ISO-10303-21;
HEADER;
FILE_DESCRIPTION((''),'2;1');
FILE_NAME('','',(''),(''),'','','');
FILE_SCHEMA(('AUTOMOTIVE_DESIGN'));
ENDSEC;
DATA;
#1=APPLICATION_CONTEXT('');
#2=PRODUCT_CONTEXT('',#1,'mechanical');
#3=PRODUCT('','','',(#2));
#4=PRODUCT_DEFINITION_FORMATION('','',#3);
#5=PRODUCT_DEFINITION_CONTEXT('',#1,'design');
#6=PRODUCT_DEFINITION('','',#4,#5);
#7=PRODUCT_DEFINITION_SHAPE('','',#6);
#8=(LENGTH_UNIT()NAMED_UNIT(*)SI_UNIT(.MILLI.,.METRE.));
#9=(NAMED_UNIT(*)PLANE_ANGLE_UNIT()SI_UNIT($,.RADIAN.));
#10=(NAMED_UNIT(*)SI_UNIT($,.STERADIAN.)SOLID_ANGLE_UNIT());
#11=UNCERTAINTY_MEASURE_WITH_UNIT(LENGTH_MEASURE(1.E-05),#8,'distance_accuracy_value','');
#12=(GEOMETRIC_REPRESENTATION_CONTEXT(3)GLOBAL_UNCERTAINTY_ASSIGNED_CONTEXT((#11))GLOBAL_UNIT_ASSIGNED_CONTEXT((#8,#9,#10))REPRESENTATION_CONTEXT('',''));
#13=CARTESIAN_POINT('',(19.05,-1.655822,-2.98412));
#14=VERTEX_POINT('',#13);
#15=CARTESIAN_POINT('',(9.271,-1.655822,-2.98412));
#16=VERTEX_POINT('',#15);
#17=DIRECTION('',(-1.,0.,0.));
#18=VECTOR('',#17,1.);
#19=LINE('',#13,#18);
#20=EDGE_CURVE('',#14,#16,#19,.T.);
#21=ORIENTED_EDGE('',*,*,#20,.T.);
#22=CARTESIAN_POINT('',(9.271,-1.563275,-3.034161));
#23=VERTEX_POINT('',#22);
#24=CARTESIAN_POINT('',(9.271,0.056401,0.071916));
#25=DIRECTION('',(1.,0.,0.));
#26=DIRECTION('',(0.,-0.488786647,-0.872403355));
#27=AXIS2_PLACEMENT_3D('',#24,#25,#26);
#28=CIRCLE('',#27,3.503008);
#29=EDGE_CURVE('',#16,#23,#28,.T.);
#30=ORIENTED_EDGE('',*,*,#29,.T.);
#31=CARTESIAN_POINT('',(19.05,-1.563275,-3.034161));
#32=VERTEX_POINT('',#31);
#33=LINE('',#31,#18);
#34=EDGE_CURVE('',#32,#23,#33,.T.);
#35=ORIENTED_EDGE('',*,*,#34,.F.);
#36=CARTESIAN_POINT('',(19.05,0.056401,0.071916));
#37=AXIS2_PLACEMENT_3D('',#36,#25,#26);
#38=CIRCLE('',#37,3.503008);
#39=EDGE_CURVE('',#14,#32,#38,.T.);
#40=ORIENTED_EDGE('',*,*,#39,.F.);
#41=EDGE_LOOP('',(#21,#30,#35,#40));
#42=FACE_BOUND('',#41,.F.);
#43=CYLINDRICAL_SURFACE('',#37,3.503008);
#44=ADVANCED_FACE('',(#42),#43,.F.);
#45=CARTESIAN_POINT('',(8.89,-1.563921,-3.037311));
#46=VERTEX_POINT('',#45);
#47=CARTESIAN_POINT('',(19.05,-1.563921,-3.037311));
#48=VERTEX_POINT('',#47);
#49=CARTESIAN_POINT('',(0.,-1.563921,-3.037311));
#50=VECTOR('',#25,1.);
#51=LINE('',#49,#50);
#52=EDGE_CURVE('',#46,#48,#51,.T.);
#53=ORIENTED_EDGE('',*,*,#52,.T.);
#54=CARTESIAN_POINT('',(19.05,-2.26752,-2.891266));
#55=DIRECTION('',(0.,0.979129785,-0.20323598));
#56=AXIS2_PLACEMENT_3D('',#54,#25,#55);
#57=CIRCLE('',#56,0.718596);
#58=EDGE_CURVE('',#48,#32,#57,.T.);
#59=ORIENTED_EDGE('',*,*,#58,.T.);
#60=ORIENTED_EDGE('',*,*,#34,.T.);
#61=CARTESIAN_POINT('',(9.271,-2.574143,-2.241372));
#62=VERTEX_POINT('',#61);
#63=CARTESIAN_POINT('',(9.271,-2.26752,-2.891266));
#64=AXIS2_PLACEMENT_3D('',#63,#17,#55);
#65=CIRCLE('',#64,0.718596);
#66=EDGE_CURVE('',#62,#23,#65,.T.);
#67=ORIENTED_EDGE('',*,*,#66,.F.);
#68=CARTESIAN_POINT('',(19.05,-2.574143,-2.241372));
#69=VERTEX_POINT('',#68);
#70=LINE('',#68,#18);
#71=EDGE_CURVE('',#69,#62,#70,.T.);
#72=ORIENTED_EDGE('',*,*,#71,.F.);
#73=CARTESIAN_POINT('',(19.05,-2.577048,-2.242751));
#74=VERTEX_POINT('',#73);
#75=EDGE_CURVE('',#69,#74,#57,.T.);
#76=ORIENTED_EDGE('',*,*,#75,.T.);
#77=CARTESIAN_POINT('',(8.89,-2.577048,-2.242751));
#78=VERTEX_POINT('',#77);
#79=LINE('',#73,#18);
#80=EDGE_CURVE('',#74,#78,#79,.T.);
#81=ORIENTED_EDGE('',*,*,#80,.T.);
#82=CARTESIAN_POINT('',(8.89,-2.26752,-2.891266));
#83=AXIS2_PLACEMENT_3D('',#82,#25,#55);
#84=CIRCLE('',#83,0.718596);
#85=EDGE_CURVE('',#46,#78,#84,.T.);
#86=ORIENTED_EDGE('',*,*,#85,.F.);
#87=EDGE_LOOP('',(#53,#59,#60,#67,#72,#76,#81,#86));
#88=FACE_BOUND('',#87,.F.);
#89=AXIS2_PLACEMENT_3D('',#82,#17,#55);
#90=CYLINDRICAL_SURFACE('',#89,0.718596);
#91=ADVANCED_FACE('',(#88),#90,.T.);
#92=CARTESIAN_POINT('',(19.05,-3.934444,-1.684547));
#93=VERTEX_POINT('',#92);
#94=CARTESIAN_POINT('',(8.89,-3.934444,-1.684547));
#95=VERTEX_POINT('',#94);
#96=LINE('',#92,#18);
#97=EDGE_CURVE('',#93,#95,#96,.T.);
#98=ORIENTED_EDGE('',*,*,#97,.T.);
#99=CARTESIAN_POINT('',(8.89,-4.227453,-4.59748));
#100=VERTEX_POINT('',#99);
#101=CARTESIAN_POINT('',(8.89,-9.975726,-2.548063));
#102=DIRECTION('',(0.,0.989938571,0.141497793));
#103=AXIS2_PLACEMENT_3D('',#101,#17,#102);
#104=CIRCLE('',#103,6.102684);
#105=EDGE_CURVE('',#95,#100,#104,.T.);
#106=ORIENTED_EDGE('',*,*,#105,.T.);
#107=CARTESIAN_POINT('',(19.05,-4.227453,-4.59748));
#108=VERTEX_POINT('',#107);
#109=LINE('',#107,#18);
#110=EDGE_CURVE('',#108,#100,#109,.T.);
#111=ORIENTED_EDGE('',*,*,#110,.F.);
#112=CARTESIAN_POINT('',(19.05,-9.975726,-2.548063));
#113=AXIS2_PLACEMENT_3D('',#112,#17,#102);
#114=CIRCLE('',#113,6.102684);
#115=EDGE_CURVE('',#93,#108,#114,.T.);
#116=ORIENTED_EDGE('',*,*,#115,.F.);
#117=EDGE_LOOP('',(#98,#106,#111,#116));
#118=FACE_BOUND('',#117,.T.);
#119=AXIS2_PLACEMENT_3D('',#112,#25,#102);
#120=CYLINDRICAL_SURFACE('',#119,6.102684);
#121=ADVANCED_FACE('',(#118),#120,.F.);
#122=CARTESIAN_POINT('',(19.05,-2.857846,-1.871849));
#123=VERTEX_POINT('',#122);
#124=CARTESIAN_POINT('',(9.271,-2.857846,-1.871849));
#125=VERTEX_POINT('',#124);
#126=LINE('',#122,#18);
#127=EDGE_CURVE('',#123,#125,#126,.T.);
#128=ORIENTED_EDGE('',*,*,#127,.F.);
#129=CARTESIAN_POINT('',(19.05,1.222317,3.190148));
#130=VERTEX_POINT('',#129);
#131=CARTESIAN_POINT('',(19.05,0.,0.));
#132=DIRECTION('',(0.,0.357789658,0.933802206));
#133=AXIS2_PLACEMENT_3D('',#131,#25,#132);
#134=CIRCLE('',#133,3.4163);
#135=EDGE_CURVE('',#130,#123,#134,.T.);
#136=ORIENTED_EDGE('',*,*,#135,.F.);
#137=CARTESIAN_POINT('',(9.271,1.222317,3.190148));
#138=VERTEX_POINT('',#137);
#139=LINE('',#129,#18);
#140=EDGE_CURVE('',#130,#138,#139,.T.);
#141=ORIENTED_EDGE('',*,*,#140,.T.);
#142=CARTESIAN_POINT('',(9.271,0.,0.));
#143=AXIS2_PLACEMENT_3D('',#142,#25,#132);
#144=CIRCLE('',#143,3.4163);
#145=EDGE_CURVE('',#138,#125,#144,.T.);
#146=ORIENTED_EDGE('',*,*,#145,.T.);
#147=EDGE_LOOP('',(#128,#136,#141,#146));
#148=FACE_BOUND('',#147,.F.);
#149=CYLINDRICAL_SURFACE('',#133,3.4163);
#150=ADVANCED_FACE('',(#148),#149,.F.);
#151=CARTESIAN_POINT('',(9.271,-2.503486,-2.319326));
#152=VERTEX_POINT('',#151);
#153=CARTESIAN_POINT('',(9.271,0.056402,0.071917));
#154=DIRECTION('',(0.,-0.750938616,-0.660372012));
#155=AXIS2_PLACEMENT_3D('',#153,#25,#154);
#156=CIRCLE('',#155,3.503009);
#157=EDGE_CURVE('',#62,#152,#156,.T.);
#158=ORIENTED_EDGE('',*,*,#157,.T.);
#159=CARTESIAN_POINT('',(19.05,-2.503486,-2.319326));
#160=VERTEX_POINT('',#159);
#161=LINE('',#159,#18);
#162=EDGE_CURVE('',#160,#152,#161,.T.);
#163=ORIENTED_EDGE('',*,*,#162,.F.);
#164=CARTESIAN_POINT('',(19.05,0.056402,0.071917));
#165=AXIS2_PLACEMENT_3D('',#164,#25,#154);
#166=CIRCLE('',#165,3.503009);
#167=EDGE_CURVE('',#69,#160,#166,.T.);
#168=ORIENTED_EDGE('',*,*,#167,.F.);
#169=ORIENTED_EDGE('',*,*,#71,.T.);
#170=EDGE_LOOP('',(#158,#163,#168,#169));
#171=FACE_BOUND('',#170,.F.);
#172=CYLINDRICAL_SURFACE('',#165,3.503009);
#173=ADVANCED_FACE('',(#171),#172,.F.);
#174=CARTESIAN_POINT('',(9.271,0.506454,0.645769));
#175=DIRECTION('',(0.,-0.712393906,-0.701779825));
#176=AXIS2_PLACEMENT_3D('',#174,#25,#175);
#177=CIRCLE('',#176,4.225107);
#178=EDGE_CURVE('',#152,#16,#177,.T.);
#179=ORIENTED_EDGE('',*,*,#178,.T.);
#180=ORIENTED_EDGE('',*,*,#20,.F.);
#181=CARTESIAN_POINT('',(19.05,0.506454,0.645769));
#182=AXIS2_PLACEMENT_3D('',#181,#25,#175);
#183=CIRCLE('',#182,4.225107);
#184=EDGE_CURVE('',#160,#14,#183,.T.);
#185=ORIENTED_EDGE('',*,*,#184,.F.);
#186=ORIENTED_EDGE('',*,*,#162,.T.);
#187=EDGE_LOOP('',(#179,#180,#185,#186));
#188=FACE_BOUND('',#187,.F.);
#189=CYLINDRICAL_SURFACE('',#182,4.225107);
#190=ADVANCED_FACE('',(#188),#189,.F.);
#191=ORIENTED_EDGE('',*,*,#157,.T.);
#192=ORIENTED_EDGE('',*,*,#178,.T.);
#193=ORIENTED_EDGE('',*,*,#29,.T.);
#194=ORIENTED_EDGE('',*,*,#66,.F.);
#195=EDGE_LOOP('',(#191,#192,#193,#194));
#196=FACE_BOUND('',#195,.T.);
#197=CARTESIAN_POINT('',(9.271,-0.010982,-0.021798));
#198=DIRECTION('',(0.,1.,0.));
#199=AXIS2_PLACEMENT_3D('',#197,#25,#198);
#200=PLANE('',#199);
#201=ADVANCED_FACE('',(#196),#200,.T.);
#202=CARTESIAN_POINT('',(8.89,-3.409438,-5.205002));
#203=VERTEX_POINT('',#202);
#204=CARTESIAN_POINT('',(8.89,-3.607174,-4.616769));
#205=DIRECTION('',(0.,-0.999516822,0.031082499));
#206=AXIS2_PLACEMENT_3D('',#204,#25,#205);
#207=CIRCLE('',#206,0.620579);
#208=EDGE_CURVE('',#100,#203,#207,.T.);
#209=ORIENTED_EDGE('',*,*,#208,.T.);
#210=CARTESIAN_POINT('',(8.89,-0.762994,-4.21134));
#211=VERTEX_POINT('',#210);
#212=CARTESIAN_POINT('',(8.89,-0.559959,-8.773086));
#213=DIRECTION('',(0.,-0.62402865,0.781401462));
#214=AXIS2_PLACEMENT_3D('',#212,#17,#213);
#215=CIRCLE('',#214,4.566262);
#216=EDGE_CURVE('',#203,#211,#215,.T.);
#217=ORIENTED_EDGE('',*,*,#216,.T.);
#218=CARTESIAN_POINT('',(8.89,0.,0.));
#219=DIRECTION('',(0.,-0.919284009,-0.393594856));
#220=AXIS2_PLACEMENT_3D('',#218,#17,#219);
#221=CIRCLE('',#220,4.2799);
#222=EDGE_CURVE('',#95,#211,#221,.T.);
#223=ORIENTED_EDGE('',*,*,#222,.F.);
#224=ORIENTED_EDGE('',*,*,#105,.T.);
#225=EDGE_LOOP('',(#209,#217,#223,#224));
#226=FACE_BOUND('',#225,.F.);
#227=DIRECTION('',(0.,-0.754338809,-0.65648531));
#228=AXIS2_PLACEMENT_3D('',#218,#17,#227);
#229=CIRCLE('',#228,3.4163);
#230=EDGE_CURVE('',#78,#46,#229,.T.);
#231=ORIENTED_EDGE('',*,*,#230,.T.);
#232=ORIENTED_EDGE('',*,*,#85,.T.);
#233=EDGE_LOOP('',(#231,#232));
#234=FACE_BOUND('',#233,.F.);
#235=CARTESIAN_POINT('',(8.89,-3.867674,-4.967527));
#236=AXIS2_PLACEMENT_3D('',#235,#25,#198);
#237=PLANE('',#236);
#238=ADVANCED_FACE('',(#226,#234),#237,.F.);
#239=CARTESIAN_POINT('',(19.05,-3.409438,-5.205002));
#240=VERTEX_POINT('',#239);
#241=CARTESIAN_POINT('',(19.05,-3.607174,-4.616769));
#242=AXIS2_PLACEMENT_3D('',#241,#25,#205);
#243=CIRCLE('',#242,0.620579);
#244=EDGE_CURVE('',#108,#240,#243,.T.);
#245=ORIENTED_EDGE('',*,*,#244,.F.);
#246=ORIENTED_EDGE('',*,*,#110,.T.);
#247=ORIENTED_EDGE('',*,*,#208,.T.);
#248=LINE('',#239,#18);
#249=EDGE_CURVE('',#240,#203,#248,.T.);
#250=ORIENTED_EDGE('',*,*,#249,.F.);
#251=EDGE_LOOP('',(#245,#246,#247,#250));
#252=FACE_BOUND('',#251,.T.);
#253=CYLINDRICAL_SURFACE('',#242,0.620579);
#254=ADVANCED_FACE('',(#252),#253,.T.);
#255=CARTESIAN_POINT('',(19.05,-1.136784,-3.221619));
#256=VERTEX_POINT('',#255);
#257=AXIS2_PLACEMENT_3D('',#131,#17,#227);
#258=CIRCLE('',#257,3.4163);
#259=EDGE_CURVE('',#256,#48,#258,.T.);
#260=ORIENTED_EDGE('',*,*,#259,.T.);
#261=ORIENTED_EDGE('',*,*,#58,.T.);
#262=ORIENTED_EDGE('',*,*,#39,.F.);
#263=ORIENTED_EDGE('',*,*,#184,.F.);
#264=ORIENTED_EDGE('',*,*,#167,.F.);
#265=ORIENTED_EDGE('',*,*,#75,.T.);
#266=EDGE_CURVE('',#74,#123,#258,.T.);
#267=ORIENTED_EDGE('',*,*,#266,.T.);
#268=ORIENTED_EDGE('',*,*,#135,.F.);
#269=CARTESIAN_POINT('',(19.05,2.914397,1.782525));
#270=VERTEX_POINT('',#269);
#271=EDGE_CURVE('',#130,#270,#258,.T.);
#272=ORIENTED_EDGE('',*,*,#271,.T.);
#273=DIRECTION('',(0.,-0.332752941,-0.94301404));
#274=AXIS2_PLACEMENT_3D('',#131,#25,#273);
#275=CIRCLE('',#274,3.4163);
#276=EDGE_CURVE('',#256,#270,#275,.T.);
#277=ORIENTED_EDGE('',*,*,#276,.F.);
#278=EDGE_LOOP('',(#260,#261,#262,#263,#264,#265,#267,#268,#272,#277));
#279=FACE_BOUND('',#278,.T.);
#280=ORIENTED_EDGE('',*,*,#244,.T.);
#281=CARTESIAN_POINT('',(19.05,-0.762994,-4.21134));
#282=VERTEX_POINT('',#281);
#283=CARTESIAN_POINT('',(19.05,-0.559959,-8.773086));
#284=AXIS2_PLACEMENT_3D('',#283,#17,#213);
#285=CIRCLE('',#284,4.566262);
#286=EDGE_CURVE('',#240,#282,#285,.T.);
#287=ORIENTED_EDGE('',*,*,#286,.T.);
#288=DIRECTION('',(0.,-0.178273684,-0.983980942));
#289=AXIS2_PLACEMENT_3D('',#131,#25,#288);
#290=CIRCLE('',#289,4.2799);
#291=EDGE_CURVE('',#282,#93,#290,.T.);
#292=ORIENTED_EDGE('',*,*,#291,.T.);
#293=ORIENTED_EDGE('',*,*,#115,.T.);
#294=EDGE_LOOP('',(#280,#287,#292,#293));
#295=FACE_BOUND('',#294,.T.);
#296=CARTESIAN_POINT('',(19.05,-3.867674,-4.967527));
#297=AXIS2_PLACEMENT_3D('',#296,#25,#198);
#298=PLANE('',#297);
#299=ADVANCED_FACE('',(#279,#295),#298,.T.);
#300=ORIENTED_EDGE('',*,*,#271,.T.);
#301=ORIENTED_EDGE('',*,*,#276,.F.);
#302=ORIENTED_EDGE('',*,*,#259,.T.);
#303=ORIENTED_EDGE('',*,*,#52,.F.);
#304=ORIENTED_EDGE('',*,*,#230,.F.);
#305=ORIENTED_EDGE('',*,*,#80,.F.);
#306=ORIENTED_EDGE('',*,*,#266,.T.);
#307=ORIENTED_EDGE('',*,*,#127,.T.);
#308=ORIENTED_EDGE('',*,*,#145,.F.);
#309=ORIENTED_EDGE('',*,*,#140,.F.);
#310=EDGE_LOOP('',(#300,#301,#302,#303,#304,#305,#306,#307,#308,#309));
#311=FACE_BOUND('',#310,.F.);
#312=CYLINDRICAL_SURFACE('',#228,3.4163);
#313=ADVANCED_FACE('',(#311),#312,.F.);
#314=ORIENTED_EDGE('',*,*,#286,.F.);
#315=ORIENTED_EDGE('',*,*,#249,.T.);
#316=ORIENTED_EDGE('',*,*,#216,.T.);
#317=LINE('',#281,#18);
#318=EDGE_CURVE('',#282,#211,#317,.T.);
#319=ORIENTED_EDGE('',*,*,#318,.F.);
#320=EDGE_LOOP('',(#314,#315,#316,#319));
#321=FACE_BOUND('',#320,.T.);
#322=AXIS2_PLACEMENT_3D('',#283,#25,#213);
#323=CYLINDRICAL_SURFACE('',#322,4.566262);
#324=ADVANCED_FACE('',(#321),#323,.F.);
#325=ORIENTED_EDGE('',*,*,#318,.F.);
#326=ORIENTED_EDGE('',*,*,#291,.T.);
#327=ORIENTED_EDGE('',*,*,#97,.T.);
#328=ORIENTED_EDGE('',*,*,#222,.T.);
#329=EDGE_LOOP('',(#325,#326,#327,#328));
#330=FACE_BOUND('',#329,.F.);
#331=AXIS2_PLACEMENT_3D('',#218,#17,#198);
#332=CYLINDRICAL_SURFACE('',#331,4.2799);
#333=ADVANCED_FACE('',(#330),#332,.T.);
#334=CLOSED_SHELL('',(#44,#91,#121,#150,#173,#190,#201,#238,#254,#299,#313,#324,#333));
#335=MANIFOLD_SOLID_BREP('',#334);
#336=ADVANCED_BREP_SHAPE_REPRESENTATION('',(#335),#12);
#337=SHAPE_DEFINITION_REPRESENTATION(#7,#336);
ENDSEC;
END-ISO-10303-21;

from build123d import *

# Parameters (mm, degrees)
F0_R     = 4.2799
F1_DEPTH = 8.89
F2_DEPTH = 10.16
F3_DEPTH = 8.89
F5_DEPTH = 9.779
F7_DEPTH = 10.16


# Not quite as in the source:
# - a feature names something its author has since deleted; it is built from what else it names


with BuildPart() as f1:
    # F0 (on Right) → F1 (new body)
    with BuildSketch(Plane.YZ):
        Circle(F0_R)
        with BuildLine():
            ThreePointArc((-2.5770476719, -2.2427507634), (-1.1973173615, 3.1996151059), (3.4163, 0))
            ThreePointArc((3.4163, 0), (1.7788031507, -2.9166701975), (-1.563921316, -3.0373106208))
            ThreePointArc((-1.563921316, -3.0373106208), (-2.1082545817, -2.6881905268), (-2.5770476719, -2.2427507634))
        make_face(mode=Mode.SUBTRACT)
        with BuildLine():
            ThreePointArc((-1.563921316, -3.0373106208), (-1.8240626008, -2.3258233831), (-2.5770476719, -2.2427507634))
            ThreePointArc((-2.5770476719, -2.2427507634), (-2.1082545817, -2.6881905268), (-1.563921316, -3.0373106208))
        make_face()
    extrude(amount=F1_DEPTH)

    # F2 (add): a face of the model
    f2_faces = [f1.faces().sort_by_distance(p)[0] for p in [
        (8.89, -4.1588461475, 0),
    ]]
    extrude(f2_faces, amount=F2_DEPTH)

    # F3 (cut): a face of the model
    f3_faces = [f1.faces().sort_by_distance(p)[0] for p in [
        (0, -4.1588461475, 0),
    ]]
    extrude(f3_faces, amount=-F3_DEPTH, mode=Mode.SUBTRACT)

    # F4 (on face) → F5 (cut)
    with BuildSketch(Plane.YZ.offset(19.05)):
        with BuildLine():
            ThreePointArc((1.222316808, 3.1901484779), (-2.6598297691, 2.1439242733), (-2.8578464427, -1.8718491926))
            ThreePointArc((-2.8578464427, -1.8718491926), (-2.7221442185, -2.0613321722), (-2.5741425301, -2.2413721494))
            ThreePointArc((-2.5741425301, -2.2413721494), (-1.8240626008, -2.3258233831), (-1.5632748259, -3.0341606246))
            ThreePointArc((-1.5632748259, -3.0341606246), (-1.3531490958, -3.134987559), (-1.1367838725, -3.2216188659))
            ThreePointArc((-1.1367838725, -3.2216188659), (2.6552480052, -2.1495961762), (2.9143968144, 1.7825254271))
            ThreePointArc((2.9143968144, 1.7825254271), (2.1811855738, 2.6219665113), (1.222316808, 3.1901484779))
        make_face()
        with BuildLine():
            ThreePointArc((-1.5632748259, -3.0341606246), (-1.8240626008, -2.3258233831), (-2.5741425301, -2.2413721494))
            ThreePointArc((-2.5741425301, -2.2413721494), (-2.5391071094, -2.2806143375), (-2.5034863371, -2.3193259716))
            ThreePointArc((-2.5034863371, -2.3193259716), (-2.1009284684, -2.6788491558), (-1.6558220878, -2.9841196383))
            ThreePointArc((-1.6558220878, -2.9841196383), (-1.6097363346, -3.009487598), (-1.5632748259, -3.0341606246))
        make_face()
    extrude(amount=-F5_DEPTH, mode=Mode.SUBTRACT)

    # F6 (on face) → F7 (join)
    with BuildSketch(Plane.YZ.offset(19.05)):
        with BuildLine():
            Line((-3.4094376469, -5.2050021479), (-3.808154026, -4.9026301131))
            Line((-3.808154026, -4.9026301131), (-4.2274528535, -4.5974798009))
            ThreePointArc((-4.2274528535, -4.5974798009), (-3.9771826251, -5.1149772874), (-3.4094376469, -5.2050021479))
        make_face()
        with BuildLine():
            ThreePointArc((-0.7629935409, -4.2113400322), (-1.5232386045, -3.9996610061), (-2.2316948802, -3.6519969841))
            Line((-2.2316948802, -3.6519969841), (-3.4094376469, -5.2050021479))
            ThreePointArc((-3.4094376469, -5.2050021479), (-2.1650447738, -4.4982234477), (-0.7629935409, -4.2113400322))
        make_face()
        with BuildLine():
            Line((-4.2274528535, -4.5974798009), (-3.0318107196, -3.0208720215))
            ThreePointArc((-3.0318107196, -3.0208720215), (-3.5466345046, -2.3956059152), (-3.9344436304, -1.6845466242))
            ThreePointArc((-3.9344436304, -1.6845466242), (-3.9036835411, -3.1588441029), (-4.2274528535, -4.5974798009))
        make_face()
        with BuildLine():
            Line((-2.6242534582, -3.3423499234), (-2.6430441595, -3.3662830512))
            ThreePointArc((-2.6430441595, -3.3662830512), (-2.4415524342, -3.515162261), (-2.2316948802, -3.6519969841))
            Line((-2.2316948802, -3.6519969841), (-2.6242534582, -3.3423499234))
        make_face()
        with BuildLine():
            ThreePointArc((-3.0318107196, -3.0208720215), (-2.8426786082, -3.1994878247), (-2.6430441595, -3.3662830512))
            Line((-2.6430441595, -3.3662830512), (-2.6242534582, -3.3423499234))
            Line((-2.6242534582, -3.3423499234), (-3.0318107196, -3.0208720215))
        make_face()
        with BuildLine():
            ThreePointArc((-2.2316948802, -3.6519969841), (-2.4415524342, -3.515162261), (-2.6430441595, -3.3662830512))
            Line((-2.6430441595, -3.3662830512), (-3.808154026, -4.9026301131))
            Line((-3.808154026, -4.9026301131), (-3.4094376469, -5.2050021479))
            Line((-3.4094376469, -5.2050021479), (-2.2316948802, -3.6519969841))
        make_face()
        with BuildLine():
            Line((-3.808154026, -4.9026301131), (-2.6430441595, -3.3662830512))
            ThreePointArc((-2.6430441595, -3.3662830512), (-2.8426786082, -3.1994878247), (-3.0318107196, -3.0208720215))
            Line((-3.0318107196, -3.0208720215), (-4.2274528535, -4.5974798009))
            Line((-4.2274528535, -4.5974798009), (-3.808154026, -4.9026301131))
        make_face()
    extrude(amount=-F7_DEPTH)


solid = f1.part
